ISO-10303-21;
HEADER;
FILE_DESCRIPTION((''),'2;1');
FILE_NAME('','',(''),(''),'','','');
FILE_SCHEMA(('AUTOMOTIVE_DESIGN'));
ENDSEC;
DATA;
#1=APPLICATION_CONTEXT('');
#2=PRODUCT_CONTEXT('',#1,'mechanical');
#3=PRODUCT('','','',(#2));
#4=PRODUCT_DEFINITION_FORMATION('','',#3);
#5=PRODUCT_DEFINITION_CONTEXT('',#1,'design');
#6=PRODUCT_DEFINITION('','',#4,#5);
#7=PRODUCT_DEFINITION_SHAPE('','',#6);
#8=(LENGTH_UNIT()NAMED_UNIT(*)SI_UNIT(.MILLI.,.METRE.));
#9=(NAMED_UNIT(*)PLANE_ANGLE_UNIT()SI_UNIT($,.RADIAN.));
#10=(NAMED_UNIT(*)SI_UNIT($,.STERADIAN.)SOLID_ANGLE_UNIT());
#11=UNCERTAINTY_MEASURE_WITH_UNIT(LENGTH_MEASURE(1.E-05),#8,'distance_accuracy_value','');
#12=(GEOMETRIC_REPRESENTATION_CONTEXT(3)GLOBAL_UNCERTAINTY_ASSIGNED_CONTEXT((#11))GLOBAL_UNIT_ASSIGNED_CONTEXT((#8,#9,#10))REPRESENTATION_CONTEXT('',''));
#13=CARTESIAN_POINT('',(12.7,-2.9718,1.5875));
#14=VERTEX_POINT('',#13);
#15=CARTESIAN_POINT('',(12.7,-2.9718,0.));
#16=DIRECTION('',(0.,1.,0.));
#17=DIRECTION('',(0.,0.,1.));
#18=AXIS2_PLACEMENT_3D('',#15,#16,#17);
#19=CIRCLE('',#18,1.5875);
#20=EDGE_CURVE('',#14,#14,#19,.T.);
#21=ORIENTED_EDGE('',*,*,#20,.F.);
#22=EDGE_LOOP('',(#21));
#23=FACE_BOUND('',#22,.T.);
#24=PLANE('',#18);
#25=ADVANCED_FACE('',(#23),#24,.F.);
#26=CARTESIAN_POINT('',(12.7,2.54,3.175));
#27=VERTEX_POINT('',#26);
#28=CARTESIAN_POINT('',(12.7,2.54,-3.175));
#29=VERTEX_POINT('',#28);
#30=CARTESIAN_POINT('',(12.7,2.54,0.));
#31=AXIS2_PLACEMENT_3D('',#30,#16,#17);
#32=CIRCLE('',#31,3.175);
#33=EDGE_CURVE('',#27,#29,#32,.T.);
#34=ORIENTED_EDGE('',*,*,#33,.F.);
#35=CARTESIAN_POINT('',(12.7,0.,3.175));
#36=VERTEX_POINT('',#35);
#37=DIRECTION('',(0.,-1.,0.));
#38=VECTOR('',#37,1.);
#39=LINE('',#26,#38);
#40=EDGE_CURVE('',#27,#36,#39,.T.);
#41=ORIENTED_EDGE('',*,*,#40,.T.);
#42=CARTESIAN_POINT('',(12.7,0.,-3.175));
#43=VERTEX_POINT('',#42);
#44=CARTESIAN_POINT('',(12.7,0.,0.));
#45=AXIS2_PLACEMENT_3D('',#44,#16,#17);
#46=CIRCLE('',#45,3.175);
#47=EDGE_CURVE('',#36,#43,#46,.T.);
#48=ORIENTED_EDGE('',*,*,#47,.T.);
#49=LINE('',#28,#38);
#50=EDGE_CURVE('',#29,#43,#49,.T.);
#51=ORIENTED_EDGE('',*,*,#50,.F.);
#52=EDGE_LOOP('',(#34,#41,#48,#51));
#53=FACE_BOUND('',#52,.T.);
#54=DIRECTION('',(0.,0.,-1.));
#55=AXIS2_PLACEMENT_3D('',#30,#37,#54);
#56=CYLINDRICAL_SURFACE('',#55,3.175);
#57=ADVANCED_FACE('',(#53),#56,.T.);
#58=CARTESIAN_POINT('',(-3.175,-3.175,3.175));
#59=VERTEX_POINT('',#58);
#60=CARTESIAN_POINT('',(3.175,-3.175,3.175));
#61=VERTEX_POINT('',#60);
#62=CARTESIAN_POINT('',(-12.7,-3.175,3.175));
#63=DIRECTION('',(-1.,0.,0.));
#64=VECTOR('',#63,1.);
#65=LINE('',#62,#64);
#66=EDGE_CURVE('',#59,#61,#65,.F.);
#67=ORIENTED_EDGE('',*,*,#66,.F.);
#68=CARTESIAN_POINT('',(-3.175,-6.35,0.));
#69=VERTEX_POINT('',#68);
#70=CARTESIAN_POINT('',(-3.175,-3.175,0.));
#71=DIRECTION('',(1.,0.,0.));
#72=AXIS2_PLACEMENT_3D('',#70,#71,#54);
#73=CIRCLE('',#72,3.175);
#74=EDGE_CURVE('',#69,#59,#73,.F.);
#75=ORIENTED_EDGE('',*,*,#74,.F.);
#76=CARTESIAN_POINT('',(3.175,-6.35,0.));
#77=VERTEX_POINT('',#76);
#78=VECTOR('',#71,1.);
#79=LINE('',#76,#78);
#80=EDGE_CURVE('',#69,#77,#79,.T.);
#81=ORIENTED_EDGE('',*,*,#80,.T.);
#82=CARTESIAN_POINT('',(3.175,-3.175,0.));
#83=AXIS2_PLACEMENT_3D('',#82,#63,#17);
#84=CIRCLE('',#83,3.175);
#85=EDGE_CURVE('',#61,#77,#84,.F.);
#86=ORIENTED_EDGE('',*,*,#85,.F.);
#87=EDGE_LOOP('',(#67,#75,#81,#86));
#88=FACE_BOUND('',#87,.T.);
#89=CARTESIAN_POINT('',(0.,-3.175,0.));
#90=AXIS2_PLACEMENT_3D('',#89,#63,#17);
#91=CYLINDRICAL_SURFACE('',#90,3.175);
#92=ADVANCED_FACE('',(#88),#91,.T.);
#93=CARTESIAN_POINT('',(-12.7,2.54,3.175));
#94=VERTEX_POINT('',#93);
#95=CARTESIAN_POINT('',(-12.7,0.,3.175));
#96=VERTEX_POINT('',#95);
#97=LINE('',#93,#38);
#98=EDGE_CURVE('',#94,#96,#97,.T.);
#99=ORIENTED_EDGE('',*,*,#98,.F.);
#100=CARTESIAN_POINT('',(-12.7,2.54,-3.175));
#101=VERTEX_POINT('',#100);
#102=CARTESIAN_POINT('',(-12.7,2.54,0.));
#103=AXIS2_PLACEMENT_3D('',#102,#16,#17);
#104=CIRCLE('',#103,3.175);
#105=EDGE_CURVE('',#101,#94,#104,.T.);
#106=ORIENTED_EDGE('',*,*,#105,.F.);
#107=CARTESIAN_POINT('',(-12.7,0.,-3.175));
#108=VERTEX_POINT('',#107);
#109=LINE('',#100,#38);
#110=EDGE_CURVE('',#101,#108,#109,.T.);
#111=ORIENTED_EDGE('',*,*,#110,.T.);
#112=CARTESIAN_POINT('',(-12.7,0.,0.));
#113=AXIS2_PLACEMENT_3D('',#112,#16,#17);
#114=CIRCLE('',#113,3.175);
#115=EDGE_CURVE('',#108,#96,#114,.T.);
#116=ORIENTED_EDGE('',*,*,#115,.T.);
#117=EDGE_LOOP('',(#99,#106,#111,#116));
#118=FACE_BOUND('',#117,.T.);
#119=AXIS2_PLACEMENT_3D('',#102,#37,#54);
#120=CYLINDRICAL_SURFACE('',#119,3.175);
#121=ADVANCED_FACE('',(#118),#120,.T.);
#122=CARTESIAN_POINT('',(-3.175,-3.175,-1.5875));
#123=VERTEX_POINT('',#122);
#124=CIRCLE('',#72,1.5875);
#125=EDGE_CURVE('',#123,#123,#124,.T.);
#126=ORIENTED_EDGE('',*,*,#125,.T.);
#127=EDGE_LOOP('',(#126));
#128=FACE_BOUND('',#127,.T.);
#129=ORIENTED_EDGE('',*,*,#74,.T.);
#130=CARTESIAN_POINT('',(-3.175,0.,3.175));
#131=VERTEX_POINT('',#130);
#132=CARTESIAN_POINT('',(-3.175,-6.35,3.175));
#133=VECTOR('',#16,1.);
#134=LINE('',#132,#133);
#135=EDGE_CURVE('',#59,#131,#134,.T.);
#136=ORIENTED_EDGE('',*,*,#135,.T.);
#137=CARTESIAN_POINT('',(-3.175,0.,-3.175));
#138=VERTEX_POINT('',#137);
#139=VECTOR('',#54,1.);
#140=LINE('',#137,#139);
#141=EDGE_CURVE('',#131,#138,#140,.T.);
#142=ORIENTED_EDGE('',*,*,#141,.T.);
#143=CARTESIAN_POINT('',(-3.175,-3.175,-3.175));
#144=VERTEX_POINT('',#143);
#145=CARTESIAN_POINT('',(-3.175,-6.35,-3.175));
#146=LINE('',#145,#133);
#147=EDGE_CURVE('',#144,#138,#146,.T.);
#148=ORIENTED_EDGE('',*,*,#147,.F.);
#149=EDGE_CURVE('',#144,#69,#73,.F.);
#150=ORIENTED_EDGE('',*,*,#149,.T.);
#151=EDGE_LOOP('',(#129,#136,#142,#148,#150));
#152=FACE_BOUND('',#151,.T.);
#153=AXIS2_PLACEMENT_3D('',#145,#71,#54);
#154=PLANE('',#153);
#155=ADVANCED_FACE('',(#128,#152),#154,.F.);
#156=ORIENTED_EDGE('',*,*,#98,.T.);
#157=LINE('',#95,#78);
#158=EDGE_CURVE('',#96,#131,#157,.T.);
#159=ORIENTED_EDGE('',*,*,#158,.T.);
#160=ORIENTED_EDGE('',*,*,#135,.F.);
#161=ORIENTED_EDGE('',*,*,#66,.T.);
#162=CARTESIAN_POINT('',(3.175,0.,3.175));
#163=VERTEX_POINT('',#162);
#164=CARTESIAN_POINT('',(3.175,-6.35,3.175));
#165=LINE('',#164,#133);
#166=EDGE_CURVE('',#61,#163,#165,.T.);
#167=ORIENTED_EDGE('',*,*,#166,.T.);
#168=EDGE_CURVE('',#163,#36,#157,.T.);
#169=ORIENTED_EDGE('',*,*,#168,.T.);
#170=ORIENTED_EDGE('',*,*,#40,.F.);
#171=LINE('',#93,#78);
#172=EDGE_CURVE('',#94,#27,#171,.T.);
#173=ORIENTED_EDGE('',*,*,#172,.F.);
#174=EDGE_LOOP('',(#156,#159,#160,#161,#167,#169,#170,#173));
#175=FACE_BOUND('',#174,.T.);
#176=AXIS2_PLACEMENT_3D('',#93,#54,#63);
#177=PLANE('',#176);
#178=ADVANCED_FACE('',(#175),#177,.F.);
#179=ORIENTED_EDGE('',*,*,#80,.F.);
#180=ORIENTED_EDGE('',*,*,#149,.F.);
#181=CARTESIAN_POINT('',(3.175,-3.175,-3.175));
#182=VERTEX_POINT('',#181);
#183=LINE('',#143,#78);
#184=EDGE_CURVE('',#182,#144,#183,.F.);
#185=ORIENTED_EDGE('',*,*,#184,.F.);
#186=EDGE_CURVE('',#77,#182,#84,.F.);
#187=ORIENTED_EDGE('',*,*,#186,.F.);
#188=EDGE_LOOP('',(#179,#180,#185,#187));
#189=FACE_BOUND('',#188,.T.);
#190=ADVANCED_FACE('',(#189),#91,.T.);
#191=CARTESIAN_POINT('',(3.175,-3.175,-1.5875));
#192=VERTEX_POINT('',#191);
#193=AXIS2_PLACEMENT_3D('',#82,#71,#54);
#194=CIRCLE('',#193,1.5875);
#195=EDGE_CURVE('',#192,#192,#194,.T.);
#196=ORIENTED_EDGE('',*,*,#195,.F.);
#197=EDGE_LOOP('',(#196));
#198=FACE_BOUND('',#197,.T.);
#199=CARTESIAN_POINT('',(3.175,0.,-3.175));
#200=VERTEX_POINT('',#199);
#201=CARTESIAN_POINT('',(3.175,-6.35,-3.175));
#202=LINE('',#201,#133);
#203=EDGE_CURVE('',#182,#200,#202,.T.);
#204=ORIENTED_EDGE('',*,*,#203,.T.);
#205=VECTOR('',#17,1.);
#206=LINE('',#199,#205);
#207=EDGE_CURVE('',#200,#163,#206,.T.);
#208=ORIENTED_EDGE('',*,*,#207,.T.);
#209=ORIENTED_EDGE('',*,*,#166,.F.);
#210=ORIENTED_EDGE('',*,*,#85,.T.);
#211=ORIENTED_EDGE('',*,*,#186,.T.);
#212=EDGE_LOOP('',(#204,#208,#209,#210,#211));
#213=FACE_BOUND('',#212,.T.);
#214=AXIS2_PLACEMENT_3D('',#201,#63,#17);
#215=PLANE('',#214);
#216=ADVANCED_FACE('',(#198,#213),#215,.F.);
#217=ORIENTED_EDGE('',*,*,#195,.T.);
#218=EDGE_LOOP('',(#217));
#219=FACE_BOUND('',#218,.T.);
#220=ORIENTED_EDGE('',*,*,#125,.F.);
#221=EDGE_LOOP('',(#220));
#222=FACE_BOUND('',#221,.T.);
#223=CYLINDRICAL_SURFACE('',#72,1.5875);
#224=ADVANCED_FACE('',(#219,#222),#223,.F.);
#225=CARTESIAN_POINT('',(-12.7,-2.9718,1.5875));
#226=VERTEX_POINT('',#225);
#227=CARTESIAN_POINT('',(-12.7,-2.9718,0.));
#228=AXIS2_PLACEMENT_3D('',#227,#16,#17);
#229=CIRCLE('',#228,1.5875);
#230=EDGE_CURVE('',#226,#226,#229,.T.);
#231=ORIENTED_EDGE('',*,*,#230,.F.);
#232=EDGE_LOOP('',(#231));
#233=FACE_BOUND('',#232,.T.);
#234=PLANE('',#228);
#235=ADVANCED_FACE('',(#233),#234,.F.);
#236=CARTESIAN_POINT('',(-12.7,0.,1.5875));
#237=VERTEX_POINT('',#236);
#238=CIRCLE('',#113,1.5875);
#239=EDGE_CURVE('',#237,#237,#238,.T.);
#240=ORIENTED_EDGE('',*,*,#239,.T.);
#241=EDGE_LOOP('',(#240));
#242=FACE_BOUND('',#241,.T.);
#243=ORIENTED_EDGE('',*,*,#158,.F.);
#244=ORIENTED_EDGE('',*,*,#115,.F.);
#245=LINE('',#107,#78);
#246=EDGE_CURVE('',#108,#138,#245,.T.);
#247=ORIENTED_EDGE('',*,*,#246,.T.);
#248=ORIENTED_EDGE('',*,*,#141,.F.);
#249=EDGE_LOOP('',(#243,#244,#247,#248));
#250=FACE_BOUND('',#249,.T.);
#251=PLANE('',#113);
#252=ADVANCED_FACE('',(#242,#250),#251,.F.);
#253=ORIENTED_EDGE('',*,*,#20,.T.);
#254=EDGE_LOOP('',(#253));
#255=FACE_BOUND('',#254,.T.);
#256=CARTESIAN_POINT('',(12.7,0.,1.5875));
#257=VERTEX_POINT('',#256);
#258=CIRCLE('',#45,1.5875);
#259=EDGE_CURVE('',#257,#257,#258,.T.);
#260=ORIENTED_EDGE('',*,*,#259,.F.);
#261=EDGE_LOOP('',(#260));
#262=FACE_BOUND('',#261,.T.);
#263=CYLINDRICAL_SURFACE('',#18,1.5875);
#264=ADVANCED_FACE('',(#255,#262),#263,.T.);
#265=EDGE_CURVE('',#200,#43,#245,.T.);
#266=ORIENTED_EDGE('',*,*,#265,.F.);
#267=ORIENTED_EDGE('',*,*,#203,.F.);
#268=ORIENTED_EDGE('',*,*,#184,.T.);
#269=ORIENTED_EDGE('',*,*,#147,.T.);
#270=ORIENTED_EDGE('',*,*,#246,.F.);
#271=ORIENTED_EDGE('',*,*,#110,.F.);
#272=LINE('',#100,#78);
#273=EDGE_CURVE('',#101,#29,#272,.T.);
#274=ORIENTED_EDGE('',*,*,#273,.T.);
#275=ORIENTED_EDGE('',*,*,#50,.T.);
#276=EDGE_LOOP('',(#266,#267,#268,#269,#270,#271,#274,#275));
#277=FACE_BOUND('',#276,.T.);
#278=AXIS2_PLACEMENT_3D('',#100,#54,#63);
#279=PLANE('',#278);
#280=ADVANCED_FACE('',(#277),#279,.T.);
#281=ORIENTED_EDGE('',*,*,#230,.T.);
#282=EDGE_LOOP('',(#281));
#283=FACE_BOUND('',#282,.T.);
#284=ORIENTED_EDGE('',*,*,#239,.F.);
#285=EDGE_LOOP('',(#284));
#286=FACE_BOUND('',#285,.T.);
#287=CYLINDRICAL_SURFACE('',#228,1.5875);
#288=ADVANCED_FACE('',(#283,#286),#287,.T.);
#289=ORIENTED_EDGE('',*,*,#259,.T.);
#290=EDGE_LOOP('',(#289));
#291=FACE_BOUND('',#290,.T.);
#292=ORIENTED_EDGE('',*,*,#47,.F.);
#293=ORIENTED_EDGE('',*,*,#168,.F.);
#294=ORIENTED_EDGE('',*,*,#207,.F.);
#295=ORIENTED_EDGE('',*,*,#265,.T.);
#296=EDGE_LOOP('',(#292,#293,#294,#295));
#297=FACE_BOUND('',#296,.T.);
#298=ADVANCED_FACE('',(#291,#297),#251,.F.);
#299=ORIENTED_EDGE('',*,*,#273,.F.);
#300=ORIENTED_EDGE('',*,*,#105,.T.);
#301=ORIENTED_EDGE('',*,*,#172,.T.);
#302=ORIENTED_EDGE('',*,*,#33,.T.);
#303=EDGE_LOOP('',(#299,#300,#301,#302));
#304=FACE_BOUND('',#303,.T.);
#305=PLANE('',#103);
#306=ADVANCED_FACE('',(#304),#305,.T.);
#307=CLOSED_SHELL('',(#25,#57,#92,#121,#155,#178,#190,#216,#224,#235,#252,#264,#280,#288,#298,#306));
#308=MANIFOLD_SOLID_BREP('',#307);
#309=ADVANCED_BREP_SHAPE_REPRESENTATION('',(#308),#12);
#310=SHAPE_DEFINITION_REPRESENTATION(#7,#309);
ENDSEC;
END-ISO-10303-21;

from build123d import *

# Parameters (mm, degrees)
BOSS_EXTRUDE1_DEPTH = 2.54
SKETCH1_4_R         = 1.5875
BOSS_EXTRUDE3_DEPTH = 2.9718
SKETCH4_W           = 6.35
SKETCH4_H           = 6.35
BOSS_EXTRUDE4_DEPTH = 6.35
SKETCH5_R           = 1.5875
CUT_EXTRUDE1_DEPTH  = 6.35
FILLET1_R           = 3.175


with BuildPart() as part:
    # Sketch1 → Boss-Extrude1 (new body)
    with BuildSketch(Plane(origin=(0, 0, 0), x_dir=(1, 0, 0), z_dir=(0, 1, 0))):
        with BuildLine():
            Line((-12.7, 3.175), (12.7, 3.175))
            ThreePointArc((12.7, 3.175), (15.875, 0), (12.7, -3.175))
            Line((12.7, -3.175), (-12.7, -3.175))
            ThreePointArc((-12.7, -3.175), (-15.875, 0), (-12.7, 3.175))
        make_face()
    extrude(amount=BOSS_EXTRUDE1_DEPTH)

    # Sketch1<4> → Boss-Extrude3 (add)
    with BuildSketch(Plane(origin=(0, 0, 0), x_dir=(1, 0, 0), z_dir=(0, 1, 0))):
        with Locations(Location((-12.7, 0, 0), (0, 0, 270))):
            Circle(SKETCH1_4_R)
        with Locations(Location((12.7, 0, 0), (0, 0, 270))):
            Circle(SKETCH1_4_R)
    extrude(amount=-BOSS_EXTRUDE3_DEPTH)

    # Sketch4 → Boss-Extrude4 (add)
    with BuildSketch(Plane.XZ):
        Rectangle(SKETCH4_W, SKETCH4_H)
    extrude(amount=BOSS_EXTRUDE4_DEPTH)

    # Sketch5 → Cut-Extrude1 (cut)
    with BuildSketch(Plane(origin=(3.175, 0, 0), x_dir=(0, 0, -1), z_dir=(1, 0, 0))):
        with Locations((0, -3.175)):
            Circle(SKETCH5_R)
    extrude(amount=-CUT_EXTRUDE1_DEPTH, mode=Mode.SUBTRACT)

    # Fillet1
    fillet1_edges = [part.edges().sort_by_distance(p)[0] for p in [
        (0, -6.35, 3.175),
        (0, -6.35, -3.175),
    ]]
    fillet(fillet1_edges, radius=FILLET1_R - 0.0001)  # a hair under: the kernel refuses the full size


solid = part.part
